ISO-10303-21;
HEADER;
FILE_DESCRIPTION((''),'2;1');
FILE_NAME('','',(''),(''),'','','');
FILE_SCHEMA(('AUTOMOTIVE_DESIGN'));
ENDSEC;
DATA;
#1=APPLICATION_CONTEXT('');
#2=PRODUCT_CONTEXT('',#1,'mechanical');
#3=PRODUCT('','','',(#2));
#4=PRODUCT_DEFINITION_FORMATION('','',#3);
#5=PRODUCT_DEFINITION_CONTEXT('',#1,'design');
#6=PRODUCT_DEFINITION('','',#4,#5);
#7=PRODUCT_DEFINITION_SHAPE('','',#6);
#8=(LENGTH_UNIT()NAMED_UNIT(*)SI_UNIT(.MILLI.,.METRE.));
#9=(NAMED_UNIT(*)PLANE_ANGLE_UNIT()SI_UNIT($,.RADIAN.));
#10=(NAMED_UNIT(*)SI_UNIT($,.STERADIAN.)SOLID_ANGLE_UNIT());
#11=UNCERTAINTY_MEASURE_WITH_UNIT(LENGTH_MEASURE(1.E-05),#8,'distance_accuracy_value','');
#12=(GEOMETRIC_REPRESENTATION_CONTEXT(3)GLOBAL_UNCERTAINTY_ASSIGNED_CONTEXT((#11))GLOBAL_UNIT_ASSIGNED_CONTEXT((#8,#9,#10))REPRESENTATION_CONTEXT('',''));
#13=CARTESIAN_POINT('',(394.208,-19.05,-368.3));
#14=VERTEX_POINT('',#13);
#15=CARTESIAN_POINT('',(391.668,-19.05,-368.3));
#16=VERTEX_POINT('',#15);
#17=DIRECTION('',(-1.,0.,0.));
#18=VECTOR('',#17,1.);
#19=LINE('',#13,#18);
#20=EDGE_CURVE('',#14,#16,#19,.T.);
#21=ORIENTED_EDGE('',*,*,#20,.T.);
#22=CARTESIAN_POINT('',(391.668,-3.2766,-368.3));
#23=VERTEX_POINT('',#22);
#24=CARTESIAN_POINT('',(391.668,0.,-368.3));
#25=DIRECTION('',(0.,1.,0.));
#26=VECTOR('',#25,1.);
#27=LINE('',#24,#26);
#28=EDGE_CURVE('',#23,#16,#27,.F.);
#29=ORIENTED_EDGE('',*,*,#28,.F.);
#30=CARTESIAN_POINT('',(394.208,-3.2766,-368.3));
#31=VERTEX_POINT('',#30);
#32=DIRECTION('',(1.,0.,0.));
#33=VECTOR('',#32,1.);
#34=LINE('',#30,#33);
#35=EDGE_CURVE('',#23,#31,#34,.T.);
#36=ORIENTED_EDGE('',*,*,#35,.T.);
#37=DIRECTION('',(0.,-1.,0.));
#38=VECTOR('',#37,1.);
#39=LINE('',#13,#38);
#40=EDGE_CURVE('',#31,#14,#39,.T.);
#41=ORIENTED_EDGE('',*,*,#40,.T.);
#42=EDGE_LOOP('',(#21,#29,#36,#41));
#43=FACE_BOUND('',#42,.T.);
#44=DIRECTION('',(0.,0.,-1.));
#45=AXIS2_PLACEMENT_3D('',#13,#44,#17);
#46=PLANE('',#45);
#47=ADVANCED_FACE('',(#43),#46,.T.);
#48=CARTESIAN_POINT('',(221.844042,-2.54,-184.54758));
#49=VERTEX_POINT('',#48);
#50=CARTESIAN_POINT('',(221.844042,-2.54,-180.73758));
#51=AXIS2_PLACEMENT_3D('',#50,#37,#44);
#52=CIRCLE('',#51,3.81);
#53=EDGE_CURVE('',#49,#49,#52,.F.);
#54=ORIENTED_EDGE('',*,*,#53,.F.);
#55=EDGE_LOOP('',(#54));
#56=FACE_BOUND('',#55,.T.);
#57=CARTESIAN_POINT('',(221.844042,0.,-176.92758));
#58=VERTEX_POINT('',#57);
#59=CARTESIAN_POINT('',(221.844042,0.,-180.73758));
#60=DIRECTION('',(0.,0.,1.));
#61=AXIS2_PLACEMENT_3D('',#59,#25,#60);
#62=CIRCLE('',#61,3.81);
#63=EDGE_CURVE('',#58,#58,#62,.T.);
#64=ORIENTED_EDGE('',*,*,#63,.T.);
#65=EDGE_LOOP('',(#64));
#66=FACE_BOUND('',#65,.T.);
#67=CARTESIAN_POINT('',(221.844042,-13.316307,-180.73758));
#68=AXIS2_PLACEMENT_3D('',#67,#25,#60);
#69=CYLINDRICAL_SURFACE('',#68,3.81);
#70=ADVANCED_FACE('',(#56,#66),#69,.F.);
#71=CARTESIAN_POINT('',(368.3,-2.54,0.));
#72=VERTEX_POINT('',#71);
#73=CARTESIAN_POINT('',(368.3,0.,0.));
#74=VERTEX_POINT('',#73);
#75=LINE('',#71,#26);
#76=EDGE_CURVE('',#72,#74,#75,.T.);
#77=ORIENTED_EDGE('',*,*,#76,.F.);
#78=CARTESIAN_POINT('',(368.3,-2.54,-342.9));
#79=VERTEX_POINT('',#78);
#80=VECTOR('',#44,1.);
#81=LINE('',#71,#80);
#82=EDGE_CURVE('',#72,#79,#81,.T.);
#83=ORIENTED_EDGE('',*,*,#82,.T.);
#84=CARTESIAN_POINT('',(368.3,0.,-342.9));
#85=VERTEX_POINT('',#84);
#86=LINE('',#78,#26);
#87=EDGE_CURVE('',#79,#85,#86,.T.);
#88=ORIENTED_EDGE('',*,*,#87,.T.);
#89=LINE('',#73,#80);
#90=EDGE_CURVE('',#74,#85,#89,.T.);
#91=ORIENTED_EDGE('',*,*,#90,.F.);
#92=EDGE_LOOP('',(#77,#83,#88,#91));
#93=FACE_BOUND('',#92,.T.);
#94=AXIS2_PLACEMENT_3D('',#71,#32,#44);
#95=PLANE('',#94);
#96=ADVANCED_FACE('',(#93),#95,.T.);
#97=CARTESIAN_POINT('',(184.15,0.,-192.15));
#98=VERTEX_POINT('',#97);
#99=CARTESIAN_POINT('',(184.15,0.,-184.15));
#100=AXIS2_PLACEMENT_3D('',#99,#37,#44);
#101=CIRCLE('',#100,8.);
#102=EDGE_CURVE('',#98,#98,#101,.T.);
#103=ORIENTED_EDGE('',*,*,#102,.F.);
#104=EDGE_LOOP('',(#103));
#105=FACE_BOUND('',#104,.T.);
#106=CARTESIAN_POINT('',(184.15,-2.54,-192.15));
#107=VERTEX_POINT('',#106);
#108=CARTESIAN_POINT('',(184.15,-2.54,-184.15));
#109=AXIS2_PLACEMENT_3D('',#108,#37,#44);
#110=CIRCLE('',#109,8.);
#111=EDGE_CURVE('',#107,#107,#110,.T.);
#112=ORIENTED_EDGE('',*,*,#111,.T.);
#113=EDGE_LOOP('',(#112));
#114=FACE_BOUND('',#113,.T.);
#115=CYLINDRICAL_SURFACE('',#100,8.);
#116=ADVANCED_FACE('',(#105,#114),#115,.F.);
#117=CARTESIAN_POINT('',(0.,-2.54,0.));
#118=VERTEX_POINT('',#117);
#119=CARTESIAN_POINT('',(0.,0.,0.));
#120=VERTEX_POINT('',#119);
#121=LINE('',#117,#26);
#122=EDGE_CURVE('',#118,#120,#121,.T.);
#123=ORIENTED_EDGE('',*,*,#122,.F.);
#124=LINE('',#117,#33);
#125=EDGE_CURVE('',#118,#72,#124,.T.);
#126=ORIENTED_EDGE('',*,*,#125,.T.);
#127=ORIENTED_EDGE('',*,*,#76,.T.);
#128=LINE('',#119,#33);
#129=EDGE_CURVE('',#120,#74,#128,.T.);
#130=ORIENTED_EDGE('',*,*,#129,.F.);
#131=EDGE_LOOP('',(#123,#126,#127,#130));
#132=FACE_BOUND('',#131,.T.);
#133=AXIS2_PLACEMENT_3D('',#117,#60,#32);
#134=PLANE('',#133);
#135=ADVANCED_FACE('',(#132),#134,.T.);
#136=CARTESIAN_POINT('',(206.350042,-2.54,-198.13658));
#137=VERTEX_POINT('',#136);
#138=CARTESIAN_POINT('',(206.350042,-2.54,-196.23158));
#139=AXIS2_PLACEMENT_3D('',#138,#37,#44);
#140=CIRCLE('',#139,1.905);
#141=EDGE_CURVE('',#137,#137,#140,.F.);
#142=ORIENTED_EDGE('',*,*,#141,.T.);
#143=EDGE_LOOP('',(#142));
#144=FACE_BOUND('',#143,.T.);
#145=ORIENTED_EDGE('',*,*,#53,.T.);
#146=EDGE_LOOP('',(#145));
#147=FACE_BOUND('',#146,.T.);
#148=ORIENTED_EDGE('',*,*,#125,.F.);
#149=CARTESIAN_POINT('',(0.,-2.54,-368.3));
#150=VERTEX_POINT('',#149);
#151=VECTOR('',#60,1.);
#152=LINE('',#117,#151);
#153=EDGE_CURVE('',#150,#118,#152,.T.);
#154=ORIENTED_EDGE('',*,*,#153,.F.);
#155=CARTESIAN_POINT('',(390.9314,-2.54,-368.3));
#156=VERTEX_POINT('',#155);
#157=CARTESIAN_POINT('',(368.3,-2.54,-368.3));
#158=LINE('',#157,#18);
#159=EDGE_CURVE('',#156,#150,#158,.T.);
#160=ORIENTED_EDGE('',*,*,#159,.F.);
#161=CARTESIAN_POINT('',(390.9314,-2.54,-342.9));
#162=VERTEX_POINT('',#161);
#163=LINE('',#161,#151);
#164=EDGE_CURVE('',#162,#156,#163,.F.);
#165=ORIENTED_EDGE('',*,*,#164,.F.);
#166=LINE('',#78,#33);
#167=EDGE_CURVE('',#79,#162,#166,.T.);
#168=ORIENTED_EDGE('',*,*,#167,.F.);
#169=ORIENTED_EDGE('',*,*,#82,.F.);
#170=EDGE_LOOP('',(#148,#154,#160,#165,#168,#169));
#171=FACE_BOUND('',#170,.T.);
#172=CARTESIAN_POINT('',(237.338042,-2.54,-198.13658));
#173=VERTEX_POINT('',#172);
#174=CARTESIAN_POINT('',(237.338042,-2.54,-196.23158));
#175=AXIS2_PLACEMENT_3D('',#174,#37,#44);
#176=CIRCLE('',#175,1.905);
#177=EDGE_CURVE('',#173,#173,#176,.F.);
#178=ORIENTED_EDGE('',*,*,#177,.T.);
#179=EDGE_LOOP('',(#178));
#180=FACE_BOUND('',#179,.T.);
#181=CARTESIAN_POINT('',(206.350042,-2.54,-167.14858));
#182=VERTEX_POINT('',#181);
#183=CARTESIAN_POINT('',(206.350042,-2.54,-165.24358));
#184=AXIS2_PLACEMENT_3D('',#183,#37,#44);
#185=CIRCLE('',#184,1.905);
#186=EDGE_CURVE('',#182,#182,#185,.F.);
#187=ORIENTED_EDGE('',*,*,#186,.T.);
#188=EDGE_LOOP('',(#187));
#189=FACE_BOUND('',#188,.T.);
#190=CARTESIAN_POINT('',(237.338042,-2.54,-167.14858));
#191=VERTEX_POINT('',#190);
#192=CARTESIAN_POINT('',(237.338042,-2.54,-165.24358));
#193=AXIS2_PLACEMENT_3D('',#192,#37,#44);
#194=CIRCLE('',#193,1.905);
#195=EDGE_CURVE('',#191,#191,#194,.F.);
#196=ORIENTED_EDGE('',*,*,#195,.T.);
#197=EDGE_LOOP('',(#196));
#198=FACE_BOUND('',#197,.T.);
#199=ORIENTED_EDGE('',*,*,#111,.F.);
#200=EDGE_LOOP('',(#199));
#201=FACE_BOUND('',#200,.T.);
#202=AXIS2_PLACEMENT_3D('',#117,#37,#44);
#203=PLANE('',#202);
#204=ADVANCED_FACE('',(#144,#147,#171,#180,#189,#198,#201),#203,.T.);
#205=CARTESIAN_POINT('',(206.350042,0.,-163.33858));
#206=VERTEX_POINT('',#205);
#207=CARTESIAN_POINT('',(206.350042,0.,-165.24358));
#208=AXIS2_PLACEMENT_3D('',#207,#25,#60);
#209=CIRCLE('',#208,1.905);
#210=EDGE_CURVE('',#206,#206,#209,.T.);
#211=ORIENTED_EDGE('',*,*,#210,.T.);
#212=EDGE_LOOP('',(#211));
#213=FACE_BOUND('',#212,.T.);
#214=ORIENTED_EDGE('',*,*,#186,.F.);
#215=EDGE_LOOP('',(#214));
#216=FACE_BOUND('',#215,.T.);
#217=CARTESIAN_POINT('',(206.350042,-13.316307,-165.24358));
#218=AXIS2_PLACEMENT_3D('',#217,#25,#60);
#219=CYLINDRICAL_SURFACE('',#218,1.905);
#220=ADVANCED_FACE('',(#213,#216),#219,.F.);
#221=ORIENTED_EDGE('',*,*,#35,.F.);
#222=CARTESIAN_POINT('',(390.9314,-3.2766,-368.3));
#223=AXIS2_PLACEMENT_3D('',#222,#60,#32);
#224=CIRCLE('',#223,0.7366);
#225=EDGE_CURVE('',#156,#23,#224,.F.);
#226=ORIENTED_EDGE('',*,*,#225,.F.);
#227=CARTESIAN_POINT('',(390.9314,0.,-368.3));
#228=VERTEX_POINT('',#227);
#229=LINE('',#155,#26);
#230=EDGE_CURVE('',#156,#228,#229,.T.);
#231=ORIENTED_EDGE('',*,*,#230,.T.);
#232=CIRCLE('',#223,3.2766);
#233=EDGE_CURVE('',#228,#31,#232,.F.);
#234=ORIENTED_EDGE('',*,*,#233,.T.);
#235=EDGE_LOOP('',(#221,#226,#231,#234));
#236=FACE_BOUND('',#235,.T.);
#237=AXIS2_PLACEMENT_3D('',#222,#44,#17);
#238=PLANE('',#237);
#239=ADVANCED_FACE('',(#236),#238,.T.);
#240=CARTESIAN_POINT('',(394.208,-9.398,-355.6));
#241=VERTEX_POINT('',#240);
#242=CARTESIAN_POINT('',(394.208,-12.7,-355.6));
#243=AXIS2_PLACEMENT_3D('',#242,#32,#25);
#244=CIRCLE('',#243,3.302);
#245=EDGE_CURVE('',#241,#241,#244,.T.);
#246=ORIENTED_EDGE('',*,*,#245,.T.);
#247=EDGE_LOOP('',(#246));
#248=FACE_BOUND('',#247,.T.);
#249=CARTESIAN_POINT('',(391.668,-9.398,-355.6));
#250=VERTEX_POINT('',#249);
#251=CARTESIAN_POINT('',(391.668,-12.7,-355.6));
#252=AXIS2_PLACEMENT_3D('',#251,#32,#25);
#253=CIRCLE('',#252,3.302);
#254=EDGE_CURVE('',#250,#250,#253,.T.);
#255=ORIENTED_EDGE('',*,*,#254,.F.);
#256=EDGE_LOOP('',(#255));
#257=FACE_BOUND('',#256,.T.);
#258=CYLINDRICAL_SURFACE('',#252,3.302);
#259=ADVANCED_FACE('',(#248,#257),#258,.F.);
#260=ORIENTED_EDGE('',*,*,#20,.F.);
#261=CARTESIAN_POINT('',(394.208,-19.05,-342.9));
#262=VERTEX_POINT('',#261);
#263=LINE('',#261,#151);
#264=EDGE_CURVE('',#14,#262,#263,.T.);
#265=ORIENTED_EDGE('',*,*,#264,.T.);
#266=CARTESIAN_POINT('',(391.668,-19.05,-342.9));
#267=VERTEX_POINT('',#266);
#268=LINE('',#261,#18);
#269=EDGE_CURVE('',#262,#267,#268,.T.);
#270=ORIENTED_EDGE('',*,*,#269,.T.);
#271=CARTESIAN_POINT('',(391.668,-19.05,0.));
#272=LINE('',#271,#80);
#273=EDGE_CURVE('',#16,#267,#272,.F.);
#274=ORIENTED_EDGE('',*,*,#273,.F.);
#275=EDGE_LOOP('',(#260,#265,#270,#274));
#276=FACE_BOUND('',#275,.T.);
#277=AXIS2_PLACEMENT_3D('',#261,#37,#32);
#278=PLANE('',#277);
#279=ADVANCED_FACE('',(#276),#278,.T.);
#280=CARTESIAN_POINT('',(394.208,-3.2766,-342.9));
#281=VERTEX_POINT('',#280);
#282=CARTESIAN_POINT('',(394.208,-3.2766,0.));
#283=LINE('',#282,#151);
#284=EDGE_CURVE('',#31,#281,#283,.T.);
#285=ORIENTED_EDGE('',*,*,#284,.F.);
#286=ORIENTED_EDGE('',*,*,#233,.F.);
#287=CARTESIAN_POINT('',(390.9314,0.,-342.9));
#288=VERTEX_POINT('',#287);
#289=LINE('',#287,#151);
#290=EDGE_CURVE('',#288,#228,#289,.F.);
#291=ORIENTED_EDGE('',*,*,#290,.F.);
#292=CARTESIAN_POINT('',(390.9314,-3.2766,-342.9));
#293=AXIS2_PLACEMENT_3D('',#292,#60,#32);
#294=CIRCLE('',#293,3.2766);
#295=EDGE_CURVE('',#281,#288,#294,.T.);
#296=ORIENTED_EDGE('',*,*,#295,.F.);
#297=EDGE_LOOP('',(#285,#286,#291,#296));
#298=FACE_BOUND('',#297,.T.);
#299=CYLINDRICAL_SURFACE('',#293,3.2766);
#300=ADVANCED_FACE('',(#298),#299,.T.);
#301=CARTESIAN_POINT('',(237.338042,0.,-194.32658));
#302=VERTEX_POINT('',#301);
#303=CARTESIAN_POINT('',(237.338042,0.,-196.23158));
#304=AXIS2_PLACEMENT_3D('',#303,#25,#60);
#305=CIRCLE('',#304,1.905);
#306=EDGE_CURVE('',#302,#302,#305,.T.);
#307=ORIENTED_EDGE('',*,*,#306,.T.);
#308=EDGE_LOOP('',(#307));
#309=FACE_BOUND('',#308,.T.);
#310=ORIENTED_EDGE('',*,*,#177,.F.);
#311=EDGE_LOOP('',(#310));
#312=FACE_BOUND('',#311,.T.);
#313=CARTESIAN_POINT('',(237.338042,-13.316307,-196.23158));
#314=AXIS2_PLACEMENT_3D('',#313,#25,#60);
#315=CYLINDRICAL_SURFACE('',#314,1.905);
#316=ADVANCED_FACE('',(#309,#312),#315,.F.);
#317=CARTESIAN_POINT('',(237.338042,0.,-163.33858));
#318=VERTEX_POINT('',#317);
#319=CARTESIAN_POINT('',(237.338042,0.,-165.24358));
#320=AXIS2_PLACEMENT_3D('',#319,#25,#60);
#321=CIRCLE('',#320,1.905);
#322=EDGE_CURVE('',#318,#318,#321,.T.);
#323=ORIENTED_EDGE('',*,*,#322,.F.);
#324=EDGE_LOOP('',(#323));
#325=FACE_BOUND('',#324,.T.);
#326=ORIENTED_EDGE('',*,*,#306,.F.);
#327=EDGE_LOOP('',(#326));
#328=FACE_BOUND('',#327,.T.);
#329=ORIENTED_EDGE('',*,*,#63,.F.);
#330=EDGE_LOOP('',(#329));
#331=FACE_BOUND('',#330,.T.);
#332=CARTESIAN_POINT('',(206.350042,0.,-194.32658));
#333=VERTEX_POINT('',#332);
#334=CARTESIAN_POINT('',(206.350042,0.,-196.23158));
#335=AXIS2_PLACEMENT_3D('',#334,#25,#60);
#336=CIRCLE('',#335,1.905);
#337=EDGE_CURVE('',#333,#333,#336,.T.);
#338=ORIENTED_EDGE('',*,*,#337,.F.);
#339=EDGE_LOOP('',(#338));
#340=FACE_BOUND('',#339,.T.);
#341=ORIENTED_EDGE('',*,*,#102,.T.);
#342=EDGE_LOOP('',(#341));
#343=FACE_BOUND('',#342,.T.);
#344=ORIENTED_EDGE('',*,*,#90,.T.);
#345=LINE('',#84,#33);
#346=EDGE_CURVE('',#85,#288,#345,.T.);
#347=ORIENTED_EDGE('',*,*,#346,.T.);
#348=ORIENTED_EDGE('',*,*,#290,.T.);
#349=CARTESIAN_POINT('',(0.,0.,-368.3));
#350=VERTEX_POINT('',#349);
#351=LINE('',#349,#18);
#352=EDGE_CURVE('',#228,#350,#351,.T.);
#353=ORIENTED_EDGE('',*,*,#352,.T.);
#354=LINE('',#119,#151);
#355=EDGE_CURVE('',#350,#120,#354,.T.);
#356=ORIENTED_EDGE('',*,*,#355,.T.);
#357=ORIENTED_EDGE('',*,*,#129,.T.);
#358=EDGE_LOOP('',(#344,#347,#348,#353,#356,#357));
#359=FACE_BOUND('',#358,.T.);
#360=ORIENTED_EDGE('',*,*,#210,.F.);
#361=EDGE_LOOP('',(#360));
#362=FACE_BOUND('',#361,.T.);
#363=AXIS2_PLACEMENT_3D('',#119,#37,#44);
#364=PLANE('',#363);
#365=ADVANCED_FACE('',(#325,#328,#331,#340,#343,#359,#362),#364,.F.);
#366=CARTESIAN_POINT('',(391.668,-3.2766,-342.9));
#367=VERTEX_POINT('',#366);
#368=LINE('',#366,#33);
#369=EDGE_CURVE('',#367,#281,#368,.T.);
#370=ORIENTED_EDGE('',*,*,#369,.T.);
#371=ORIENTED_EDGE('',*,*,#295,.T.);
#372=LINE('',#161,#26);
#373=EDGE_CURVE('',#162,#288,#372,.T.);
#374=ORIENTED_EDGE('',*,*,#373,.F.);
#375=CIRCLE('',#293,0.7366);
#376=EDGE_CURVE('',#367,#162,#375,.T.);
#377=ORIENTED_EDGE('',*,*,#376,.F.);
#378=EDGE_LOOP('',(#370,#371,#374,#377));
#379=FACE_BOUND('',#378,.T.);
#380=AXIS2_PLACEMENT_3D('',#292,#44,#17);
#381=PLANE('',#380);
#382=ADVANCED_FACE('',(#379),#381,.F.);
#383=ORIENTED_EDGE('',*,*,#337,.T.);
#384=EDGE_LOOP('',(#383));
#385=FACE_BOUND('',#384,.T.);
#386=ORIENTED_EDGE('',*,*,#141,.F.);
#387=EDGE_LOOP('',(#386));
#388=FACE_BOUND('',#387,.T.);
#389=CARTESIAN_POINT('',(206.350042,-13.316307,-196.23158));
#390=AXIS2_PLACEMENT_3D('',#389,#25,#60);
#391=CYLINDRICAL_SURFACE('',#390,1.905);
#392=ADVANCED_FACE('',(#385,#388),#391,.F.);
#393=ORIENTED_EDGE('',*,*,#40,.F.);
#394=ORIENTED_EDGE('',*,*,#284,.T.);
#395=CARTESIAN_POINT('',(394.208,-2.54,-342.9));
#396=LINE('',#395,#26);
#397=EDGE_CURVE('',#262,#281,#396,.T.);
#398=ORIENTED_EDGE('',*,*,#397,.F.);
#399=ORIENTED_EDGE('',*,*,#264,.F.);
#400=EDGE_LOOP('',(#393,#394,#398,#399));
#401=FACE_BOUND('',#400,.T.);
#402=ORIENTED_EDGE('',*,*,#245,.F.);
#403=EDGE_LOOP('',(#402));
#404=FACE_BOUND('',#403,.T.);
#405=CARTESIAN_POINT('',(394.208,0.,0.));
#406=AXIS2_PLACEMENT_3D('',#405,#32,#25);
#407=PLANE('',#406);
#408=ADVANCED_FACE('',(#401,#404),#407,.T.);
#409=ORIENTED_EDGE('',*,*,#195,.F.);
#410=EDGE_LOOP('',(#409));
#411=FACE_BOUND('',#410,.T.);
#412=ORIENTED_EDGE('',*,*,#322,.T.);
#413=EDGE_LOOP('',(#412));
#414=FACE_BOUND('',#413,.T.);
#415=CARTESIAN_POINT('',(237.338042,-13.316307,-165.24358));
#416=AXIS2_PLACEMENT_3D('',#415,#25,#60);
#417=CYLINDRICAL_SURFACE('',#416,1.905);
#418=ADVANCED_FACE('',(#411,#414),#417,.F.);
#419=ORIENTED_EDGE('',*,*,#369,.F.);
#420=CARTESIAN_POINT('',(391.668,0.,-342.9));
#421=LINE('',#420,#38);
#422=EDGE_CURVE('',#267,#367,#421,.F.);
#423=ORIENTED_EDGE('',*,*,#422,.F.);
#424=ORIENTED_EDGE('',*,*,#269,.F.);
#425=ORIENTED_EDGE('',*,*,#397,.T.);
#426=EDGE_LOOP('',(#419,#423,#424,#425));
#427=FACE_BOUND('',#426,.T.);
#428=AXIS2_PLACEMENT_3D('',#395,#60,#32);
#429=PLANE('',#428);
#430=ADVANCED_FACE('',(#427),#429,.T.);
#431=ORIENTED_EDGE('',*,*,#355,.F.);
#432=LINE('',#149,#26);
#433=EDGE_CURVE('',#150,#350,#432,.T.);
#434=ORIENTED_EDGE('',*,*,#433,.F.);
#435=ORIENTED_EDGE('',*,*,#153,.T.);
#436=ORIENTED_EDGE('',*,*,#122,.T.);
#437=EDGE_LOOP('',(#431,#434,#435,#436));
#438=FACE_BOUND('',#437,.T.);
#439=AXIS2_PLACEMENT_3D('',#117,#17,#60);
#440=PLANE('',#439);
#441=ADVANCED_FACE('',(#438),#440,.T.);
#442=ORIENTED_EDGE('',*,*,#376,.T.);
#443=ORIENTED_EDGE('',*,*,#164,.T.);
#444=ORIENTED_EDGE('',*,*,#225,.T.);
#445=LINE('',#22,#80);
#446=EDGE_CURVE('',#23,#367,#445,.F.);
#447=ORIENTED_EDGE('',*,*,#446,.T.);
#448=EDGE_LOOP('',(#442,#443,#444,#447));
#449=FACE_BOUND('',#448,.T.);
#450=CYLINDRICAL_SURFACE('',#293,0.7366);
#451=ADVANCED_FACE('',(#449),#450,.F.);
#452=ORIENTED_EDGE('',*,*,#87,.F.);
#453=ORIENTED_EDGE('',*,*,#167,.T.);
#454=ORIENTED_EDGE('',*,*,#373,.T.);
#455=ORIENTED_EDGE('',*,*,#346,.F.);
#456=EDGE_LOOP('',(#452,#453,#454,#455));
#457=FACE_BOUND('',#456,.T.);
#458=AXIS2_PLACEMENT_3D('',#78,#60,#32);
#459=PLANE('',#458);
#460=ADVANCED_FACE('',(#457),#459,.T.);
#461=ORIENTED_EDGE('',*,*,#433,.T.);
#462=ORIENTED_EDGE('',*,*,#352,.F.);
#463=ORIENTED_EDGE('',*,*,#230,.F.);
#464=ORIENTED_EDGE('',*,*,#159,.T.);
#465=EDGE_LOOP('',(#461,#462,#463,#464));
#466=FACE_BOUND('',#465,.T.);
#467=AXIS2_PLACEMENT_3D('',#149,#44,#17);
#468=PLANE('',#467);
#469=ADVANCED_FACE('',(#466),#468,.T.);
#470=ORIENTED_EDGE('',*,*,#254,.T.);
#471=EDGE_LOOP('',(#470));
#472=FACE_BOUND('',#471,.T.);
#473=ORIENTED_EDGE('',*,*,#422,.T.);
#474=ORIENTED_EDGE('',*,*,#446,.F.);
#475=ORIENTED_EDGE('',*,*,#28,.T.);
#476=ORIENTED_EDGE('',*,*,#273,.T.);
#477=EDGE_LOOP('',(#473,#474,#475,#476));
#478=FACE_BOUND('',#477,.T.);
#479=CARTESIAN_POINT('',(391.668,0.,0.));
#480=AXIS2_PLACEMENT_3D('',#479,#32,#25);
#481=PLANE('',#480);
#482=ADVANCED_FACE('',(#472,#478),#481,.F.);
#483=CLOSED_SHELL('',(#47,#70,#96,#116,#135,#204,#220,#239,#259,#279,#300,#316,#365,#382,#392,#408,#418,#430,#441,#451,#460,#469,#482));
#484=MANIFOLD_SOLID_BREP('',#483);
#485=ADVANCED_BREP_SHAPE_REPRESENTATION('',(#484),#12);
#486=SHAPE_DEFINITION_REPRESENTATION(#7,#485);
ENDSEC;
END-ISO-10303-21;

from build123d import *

# Parameters (mm, degrees)
BASE_FLANGE1_DEPTH           = 2.54
SKETCH6_R                    = 3.81
SKETCH6_R_2                  = 1.905
CUT_EXTRUDE1_DEPTH           = 2.54
SKETCH7_R                    = 8
CUT_EXTRUDE2_DEPTH           = 2.54
EDGE_FLANGE1_STRIP_W         = 11.6332
EDGE_FLANGE1_STRIP_H         = 2.54
EDGE_FLANGE1_STRIP_CUT_DEPTH = 25.4
EDGE_FLANGE1_DEPTH           = 25.4
SKETCH12_R                   = 3.302
CUT_EXTRUDE3_DEPTH           = 2.54


# Sheet-metal steps are written as plain solids
with BuildPart() as part:
    # Sketch1 → Base-Flange1 (new body)
    with BuildSketch(Plane(origin=(0, 0, 0), x_dir=(1, 0, 0), z_dir=(0, 1, 0))):
        Polygon((0, 0), (368.3, 0), (368.3, 342.9), (394.208, 342.9), (394.208, 368.3), (368.3, 368.3), (0, 368.3), align=None)
    extrude(amount=-BASE_FLANGE1_DEPTH)

    # Sketch6 → Cut-Extrude1 (cut)
    with BuildSketch(Plane(origin=(0, 0, 0), x_dir=(1, 0, 0), z_dir=(0, 1, 0))):
        with Locations(Location((221.844041513, 180.737580342, 0), (0, 0, 270))):
            Circle(SKETCH6_R)
        with Locations(Location((237.338041513, 165.243580342, 0), (0, 0, 270))):
            Circle(SKETCH6_R_2)
        with Locations(Location((237.338041513, 196.231580342, 0), (0, 0, 270))):
            Circle(SKETCH6_R_2)
        with Locations(Location((206.350041513, 196.231580342, 0), (0, 0, 270))):
            Circle(SKETCH6_R_2)
        with Locations(Location((206.350041513, 165.243580342, 0), (0, 0, 270))):
            Circle(SKETCH6_R_2)
    extrude(amount=-CUT_EXTRUDE1_DEPTH, mode=Mode.SUBTRACT)

    # Sketch7 → Cut-Extrude2 (cut)
    with BuildSketch(Plane(origin=(0, -2.54, 0), x_dir=(-1, 0, 0), z_dir=(0, -1, 0))):
        with Locations(Location((-184.15, 184.15, 0), (0, 0, 90))):
            Circle(SKETCH7_R)
    extrude(amount=-CUT_EXTRUDE2_DEPTH, mode=Mode.SUBTRACT)

    # Edge-Flange1 strip (across the edge) → Edge-Flange1 strip cut (cut)
    with BuildSketch(Plane(origin=(394.208, -2.54, -368.3), x_dir=(-1, 0, 0), z_dir=(0, 0, 1))):
        with Locations((-2.54, -1.27)):
            Rectangle(EDGE_FLANGE1_STRIP_W, EDGE_FLANGE1_STRIP_H)
    extrude(amount=EDGE_FLANGE1_STRIP_CUT_DEPTH, mode=Mode.SUBTRACT)

    # Edge-Flange1 section (across the edge) → Edge-Flange1 (add)
    with BuildSketch(Plane(origin=(394.208, -2.54, -368.3), x_dir=(-1, 0, 0), z_dir=(0, 0, 1))):
        with BuildLine():
            Line((0, 0.7366), (0, 16.51))
            Line((0, 16.51), (2.54, 16.51))
            Line((2.54, 16.51), (2.54, 0.7366))
            ThreePointArc((2.54, 0.7366), (2.755745145, 0.215745145), (3.2766, 0))
            Line((3.2766, 0), (3.2766, -2.54))
            ThreePointArc((3.2766, -2.54), (0.959693921, -1.580306079), (0, 0.7366))
        make_face()
    extrude(amount=EDGE_FLANGE1_DEPTH)

    # Sketch12 → Cut-Extrude3 (cut)
    with BuildSketch(Plane(origin=(394.208, 0, 0), x_dir=(0, 0, -1), z_dir=(1, 0, 0))):
        with Locations(Location((355.6, -12.7, 0), (0, 0, 90))):
            Circle(SKETCH12_R)
    extrude(amount=-CUT_EXTRUDE3_DEPTH, mode=Mode.SUBTRACT)


solid = part.part
